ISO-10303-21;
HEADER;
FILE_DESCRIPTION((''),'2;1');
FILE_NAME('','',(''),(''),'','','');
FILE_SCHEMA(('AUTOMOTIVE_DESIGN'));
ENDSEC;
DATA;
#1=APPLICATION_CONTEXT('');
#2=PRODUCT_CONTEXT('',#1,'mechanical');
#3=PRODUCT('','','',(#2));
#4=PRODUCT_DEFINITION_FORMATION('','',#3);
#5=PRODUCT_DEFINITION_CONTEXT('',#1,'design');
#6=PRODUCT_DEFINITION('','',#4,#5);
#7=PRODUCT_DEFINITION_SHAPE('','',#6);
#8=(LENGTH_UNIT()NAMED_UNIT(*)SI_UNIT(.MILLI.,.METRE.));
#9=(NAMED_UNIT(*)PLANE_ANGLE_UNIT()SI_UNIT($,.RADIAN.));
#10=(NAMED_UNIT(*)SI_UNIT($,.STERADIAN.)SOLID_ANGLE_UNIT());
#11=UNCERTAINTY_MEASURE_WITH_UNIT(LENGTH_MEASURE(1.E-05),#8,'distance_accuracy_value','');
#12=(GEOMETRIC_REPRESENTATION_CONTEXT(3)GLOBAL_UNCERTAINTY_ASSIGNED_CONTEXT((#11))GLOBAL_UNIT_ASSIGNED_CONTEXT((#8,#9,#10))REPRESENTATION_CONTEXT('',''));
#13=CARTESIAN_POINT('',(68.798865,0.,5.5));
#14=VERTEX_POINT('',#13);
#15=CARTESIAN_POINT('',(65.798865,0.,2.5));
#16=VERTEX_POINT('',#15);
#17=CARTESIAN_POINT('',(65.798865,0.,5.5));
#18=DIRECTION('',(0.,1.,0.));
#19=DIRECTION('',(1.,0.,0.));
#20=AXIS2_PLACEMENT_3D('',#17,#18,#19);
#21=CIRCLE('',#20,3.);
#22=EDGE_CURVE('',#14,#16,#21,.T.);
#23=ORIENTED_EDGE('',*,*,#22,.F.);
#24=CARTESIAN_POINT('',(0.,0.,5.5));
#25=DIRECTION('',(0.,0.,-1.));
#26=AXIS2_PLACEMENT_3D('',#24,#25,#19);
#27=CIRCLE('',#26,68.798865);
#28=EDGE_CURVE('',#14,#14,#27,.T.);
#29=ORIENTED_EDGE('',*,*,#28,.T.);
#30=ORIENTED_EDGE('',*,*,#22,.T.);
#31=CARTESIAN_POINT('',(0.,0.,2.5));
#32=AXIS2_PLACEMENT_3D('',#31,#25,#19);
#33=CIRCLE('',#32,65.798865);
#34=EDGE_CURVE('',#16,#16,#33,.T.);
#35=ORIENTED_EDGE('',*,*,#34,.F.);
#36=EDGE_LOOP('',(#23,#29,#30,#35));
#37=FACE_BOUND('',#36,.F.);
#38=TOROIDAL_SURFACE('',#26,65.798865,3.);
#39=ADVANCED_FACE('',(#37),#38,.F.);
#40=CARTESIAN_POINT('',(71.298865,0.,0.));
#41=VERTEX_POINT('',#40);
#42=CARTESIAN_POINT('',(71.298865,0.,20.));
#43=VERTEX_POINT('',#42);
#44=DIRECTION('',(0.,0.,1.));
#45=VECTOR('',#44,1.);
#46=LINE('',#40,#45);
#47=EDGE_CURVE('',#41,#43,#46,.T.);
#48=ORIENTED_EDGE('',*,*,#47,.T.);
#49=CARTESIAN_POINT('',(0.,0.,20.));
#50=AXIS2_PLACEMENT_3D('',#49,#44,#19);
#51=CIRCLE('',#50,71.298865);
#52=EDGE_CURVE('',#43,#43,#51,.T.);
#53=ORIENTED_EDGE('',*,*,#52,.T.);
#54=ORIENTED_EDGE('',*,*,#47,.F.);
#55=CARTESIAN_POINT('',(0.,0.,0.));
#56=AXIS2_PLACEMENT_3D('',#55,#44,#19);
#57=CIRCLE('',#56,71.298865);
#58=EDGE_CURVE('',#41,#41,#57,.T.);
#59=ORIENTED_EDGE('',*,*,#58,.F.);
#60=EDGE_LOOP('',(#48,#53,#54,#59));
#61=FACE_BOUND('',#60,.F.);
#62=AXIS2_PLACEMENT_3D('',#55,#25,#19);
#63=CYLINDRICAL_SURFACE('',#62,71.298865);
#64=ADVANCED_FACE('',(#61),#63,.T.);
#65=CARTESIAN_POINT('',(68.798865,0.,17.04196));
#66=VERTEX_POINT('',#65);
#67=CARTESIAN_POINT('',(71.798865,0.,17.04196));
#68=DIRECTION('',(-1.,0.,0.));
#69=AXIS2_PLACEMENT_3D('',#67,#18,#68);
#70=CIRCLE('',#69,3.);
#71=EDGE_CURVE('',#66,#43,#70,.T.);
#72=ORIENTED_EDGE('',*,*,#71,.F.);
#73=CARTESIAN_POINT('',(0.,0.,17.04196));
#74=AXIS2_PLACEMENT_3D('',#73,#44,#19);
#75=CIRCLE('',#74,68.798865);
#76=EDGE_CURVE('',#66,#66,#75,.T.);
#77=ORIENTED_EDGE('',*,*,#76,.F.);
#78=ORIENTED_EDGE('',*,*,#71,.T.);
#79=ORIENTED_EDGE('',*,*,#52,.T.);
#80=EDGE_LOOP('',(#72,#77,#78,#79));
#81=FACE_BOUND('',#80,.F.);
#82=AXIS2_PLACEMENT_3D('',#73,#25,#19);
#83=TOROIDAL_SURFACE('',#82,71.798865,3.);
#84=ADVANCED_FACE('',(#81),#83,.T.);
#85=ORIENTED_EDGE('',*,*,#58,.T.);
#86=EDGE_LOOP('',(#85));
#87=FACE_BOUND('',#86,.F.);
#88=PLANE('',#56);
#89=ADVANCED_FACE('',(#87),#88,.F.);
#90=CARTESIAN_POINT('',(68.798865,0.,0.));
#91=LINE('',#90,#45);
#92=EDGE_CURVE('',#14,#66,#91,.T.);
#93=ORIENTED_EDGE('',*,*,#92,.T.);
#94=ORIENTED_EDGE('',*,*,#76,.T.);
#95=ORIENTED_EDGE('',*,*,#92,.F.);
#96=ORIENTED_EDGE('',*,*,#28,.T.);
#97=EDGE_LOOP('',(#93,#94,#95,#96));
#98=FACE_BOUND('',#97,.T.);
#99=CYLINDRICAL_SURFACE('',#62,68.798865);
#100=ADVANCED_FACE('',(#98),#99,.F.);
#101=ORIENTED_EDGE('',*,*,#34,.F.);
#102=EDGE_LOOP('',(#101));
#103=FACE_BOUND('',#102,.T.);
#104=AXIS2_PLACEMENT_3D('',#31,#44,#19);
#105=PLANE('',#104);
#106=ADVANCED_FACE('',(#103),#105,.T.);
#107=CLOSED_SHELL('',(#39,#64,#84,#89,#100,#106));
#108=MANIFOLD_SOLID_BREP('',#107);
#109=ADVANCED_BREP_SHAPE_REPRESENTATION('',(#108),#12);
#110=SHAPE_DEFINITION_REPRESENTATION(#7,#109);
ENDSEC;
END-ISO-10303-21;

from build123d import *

# Parameters (mm, degrees)
F0_R     = 71.2988650601
F1_DEPTH = 20
F2_T     = -2.5
F3_R     = 3


# Not quite as in the source:
# - a fillet or chamfer that OpenCascade refuses, or shapes differently, is made with other operations: its cross-section is extruded or revolved along the edge and cut away or added


with BuildPart() as f1:
    # F0 (on Top) → F1 (new body)
    with BuildSketch(Plane.XY):
        Circle(F0_R)
    extrude(amount=F1_DEPTH)

    # F2
    f2_openings = [f1.faces().sort_by_distance(p)[0] for p in [
        (0, 0, 20),
    ]]
    offset(amount=F2_T, openings=f2_openings)

    # F3
    f3_edges = [f1.edges().sort_by_distance(p)[0] for p in [
        (-68.798865, 0, 2.5),
    ]]
    fillet(f3_edges, radius=F3_R)

    # F4: fillet of radius 3 on 1 edges, made by hand

    # F4_s1 → F4_t2 (revolve, cut)
    with BuildSketch(Plane.XZ):
        with BuildLine():
            ThreePointArc((68.7988650601, 17.0419601084), (69.5075772126, 18.9784517816), (71.2988650601, 20))
            Line((71.2988650601, 20), (68.7988650601, 20))
            Line((68.7988650601, 20), (68.7988650601, 17.0419601084))
        make_face()
    revolve(axis=Axis((0, 0, 20), (0, 0, 1)), mode=Mode.SUBTRACT)


solid = f1.part
